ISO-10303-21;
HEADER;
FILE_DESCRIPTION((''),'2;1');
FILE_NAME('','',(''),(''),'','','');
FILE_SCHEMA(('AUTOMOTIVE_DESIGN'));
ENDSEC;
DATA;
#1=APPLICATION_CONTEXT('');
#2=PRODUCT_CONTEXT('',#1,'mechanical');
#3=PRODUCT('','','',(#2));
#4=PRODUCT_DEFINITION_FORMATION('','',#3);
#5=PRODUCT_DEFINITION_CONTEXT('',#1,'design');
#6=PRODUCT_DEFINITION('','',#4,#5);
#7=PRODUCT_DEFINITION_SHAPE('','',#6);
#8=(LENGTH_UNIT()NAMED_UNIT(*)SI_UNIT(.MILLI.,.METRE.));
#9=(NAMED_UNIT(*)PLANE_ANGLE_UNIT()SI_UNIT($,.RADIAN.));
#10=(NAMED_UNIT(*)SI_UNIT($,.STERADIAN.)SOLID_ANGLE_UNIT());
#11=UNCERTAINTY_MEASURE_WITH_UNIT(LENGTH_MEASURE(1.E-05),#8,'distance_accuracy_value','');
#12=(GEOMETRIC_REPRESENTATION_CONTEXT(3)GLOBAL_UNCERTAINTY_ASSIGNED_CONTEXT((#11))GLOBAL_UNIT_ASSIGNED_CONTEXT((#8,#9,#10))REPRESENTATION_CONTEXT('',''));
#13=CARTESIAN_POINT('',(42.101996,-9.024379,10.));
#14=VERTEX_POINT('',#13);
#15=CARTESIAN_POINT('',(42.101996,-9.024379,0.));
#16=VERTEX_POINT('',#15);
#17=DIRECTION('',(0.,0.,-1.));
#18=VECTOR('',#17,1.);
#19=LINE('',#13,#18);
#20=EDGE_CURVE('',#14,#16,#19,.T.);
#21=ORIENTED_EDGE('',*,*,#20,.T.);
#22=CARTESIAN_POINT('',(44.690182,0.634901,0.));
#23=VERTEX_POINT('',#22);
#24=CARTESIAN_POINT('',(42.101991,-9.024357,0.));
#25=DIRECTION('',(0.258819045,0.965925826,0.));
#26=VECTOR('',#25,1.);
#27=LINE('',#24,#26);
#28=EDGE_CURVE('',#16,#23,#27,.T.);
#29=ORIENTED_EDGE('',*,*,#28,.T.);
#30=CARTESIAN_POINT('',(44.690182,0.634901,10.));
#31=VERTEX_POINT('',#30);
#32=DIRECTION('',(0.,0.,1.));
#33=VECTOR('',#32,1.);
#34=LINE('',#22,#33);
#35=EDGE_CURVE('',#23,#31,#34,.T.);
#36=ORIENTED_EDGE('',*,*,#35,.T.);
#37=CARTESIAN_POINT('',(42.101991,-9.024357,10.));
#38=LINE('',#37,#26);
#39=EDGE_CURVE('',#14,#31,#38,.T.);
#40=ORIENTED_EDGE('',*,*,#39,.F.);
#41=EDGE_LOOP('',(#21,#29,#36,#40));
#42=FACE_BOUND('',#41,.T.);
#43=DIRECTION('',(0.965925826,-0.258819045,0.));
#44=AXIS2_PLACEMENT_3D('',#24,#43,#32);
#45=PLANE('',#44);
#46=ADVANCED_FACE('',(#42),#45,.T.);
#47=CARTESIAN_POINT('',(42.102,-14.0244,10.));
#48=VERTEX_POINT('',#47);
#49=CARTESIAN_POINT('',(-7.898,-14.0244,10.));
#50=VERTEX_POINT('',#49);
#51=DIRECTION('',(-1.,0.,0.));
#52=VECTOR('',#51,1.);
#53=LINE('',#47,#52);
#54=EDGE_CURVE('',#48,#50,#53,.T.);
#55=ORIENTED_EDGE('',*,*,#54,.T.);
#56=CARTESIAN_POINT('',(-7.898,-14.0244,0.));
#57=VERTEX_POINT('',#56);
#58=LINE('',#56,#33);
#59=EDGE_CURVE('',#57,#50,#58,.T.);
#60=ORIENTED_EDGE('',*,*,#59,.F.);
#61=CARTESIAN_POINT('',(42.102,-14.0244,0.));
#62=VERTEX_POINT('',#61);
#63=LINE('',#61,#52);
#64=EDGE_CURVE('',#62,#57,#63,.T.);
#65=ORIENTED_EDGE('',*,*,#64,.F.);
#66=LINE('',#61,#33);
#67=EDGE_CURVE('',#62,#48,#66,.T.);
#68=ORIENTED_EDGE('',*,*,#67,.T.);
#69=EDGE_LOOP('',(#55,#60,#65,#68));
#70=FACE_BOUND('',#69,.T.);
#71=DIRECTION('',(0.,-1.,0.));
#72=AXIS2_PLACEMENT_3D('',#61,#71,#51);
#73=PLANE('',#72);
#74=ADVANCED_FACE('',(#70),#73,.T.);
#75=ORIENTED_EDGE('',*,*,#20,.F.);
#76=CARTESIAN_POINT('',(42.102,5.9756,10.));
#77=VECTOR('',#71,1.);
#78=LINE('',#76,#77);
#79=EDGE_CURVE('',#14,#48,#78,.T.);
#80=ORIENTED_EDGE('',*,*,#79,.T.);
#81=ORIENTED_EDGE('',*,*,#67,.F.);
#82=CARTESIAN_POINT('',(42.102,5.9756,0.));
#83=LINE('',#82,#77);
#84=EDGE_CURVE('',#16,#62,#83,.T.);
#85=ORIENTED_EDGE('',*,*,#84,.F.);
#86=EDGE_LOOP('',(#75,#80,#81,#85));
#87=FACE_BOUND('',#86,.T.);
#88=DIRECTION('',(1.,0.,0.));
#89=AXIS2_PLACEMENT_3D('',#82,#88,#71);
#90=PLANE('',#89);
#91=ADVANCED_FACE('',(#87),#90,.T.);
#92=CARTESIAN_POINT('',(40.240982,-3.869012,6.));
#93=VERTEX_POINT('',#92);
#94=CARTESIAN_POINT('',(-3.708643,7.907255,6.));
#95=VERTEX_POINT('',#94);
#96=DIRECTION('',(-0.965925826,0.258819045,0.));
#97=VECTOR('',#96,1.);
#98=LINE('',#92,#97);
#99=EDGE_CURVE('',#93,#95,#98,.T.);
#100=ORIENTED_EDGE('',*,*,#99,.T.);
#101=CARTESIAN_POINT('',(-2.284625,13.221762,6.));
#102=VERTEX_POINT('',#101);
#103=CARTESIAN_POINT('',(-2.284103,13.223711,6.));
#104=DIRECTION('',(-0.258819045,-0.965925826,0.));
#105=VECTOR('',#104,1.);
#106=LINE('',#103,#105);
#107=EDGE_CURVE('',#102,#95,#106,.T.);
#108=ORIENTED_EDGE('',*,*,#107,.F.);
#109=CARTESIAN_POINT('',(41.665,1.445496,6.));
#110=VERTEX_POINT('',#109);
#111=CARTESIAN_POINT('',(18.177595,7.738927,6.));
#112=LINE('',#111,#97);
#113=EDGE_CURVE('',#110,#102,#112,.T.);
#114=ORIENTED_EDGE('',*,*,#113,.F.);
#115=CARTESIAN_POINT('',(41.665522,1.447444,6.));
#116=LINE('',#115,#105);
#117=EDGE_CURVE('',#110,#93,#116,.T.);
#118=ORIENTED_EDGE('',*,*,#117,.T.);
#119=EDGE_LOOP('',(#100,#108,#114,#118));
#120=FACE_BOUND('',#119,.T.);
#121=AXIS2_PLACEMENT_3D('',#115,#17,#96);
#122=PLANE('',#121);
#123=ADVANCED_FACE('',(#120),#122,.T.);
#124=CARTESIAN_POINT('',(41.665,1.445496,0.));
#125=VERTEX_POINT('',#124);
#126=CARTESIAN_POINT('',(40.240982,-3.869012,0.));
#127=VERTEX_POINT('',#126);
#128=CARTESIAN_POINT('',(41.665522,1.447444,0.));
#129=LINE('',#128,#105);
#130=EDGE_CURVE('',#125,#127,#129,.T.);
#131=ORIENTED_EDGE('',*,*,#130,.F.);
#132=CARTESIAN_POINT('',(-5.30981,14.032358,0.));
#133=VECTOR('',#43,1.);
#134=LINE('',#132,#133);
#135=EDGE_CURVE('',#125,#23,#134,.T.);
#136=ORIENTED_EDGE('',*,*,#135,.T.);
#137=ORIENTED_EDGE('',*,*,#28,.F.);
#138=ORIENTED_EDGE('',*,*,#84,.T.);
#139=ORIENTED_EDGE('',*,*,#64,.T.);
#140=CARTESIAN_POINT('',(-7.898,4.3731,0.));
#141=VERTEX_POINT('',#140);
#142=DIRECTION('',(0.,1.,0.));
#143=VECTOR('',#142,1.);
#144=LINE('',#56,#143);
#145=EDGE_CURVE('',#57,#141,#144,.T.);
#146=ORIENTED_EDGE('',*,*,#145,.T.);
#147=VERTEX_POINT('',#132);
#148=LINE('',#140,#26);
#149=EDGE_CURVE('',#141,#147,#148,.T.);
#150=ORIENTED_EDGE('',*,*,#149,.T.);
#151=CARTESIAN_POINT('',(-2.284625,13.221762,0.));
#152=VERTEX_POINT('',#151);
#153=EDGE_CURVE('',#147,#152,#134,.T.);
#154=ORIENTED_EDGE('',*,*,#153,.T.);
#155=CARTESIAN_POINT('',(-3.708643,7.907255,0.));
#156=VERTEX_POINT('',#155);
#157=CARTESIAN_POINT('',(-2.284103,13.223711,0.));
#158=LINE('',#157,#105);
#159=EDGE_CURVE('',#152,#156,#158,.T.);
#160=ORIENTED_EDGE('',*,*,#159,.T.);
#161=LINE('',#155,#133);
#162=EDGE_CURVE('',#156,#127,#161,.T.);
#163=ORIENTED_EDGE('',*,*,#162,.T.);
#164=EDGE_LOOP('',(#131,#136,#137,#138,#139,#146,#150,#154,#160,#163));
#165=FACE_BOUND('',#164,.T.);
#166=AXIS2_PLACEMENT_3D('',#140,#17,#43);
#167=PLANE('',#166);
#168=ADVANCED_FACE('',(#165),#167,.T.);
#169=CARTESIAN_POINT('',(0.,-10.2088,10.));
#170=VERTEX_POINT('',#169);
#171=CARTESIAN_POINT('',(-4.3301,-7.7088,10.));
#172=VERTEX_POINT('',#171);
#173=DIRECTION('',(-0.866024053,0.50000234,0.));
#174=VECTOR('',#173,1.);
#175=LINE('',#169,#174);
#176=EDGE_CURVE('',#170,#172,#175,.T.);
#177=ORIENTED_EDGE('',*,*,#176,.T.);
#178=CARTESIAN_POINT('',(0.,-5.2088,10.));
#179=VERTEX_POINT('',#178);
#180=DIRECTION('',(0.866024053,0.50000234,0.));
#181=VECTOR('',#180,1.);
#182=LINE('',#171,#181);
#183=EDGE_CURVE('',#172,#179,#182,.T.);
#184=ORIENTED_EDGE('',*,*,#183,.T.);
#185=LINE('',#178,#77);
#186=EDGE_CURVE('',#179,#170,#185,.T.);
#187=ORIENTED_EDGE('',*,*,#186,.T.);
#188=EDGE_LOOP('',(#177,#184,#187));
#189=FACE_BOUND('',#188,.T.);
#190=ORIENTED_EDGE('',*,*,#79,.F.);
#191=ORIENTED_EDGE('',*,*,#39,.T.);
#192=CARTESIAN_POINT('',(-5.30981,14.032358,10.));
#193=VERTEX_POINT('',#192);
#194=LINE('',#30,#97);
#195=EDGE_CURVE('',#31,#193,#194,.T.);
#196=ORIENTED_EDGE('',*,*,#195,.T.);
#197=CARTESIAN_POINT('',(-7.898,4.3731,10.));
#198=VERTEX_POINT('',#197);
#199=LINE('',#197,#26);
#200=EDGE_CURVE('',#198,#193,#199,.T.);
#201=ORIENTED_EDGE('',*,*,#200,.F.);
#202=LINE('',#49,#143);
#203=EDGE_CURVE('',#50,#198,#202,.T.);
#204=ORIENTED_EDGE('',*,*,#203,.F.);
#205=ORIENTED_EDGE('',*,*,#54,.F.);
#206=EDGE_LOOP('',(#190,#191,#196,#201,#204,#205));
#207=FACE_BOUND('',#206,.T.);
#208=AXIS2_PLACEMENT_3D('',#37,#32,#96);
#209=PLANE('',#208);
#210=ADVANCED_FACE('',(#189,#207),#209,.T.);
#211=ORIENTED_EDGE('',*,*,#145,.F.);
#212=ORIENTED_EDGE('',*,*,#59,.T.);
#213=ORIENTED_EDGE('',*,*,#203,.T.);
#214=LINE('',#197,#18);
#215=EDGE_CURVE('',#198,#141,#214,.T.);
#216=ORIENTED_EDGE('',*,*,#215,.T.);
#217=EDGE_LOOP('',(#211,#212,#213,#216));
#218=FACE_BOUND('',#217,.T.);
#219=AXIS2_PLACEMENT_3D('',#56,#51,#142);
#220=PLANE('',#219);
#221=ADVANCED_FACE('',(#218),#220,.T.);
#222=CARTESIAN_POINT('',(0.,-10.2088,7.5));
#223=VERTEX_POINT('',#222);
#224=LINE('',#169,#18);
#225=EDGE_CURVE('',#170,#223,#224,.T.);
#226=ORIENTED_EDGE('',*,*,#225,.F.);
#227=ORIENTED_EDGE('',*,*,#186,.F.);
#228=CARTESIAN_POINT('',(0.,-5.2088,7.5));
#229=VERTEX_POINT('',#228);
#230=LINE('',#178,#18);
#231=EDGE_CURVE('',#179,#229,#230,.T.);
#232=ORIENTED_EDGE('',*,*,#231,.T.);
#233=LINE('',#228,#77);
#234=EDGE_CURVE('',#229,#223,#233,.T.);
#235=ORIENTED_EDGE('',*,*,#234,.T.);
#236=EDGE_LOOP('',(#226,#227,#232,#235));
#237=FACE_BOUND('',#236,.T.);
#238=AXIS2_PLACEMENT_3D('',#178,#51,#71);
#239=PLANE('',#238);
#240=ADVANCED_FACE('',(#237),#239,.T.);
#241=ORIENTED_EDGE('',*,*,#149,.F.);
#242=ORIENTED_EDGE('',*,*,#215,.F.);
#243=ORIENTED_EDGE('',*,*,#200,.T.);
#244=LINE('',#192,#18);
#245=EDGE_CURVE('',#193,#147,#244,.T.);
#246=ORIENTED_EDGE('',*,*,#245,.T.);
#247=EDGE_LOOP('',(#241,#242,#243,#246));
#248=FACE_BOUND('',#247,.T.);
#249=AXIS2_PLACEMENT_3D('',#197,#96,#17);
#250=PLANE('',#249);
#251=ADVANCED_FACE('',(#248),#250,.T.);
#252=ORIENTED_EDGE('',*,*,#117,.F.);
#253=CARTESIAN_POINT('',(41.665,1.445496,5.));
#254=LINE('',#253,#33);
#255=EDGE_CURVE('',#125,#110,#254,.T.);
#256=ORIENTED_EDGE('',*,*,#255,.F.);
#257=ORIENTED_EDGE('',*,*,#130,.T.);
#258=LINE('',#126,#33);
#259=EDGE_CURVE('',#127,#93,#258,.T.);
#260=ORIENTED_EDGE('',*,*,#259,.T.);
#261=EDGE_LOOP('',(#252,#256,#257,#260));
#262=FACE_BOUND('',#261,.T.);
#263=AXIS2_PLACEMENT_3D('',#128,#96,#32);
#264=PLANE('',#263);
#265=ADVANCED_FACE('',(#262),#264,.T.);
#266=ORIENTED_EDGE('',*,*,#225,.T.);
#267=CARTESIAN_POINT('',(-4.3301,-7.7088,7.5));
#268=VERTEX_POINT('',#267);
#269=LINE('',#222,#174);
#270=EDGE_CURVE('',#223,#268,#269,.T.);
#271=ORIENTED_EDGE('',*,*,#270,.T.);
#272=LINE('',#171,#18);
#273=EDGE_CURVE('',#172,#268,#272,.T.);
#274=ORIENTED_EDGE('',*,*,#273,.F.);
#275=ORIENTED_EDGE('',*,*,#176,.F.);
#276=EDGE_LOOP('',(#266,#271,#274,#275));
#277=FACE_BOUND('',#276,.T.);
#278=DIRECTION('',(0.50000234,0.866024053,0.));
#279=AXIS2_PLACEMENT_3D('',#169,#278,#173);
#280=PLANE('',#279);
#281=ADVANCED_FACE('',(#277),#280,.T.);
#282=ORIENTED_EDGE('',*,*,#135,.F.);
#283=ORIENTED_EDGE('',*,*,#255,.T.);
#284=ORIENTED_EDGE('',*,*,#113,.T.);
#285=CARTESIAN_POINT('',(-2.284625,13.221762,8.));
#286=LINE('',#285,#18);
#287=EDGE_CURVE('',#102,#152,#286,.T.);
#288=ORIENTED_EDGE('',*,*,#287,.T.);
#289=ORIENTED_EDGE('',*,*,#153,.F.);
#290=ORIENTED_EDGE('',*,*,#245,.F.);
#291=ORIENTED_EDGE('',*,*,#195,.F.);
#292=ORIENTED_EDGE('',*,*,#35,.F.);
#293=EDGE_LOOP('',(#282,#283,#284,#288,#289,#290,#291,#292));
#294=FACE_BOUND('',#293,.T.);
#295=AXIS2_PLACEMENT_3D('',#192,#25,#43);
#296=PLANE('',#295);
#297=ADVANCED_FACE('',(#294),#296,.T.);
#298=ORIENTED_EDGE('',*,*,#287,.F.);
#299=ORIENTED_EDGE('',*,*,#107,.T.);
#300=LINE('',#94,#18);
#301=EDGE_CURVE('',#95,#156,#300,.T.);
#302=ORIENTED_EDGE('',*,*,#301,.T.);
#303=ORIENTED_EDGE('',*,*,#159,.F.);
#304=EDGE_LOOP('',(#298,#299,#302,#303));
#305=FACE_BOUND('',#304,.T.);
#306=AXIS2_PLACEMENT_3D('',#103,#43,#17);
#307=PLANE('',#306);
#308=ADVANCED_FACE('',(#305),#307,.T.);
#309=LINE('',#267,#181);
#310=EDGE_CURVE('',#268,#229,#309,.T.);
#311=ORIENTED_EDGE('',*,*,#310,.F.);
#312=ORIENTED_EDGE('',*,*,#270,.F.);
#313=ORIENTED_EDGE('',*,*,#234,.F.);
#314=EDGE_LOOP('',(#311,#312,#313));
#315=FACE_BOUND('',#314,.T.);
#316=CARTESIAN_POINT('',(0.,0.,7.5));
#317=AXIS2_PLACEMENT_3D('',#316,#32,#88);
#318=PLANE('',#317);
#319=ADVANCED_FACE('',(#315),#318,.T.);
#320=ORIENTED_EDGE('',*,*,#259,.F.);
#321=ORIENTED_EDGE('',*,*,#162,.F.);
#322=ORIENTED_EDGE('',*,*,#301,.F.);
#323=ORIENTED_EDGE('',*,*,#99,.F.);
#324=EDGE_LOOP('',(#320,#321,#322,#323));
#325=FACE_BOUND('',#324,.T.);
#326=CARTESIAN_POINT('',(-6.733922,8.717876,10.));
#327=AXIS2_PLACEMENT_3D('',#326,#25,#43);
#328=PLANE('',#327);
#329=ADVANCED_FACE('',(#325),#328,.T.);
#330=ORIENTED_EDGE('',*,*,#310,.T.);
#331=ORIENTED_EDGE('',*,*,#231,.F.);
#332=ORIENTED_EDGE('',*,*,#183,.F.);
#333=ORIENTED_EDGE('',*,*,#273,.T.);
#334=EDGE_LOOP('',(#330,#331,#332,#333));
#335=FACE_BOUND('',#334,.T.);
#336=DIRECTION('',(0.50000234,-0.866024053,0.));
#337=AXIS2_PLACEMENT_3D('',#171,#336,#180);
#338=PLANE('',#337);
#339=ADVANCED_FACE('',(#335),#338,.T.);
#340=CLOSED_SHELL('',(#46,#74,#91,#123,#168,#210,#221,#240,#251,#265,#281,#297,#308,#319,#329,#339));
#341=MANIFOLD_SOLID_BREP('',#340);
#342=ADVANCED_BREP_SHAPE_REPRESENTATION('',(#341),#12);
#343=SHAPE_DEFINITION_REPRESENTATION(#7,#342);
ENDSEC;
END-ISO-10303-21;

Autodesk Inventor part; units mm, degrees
ref_plane "YZ Plane" through (0, 0, 0) normal (1, 0, 0) x (0, 1, 0)
ref_plane "XZ Plane" through (0, 0, 0) normal (0, 1, 0) x (-1, 0, 0)
ref_plane "XY Plane" through (0, 0, 0) normal (0, 0, 1) x (1, 0, 0)
sketch "Sketch1" plane through (0, 0, 0) normal (0, 0, 1) x (1, 0, 0)
  line L0 (-7.898, 5.9756) -> (42.102, 5.9756)
  line L1 (42.102, 5.9756) -> (42.102, -14.0244)
  line L2 (42.102, -14.0244) -> (-7.898, -14.0244)
  line L3 (-7.898, -14.0244) -> (-7.898, 5.9756)
  point P0 (0, 0)
  dimension "d0" = 50
  dimension "d1" = 20
extrude "Extrusion1" add sketch "Sketch1" along normal blind 10
sketch "Sketch2" plane through (0, 0, 10) normal (0, 0, 1) x (1, 0, 0)
  line L0 (-7.898, 5.9756) -> (-7.898, -14.0244) projected
  line L1 (-7.898, 4.3731) -> (42.102, -9.0244)
  line L2 (42.102, -14.0244) -> (42.102, 5.9756) projected
  line L3 (-7.898, 4.3731) -> (-7.898, 5.9756)
  line L4 (42.102, 5.9756) -> (-7.898, 5.9756) projected
  line L5 (42.102, 5.9756) -> (42.102, -9.0244)
  point P0 (0, 0)
  dimension "d4" = 5
  dimension "d5" = 75
extrude "Extrusion2" cut sketch "Sketch2" against normal up to surface (10 mm away)
sketch "Sketch3" plane through (-7.898, 4.3731, 10) normal (0.258819, 0.9659258, 0) x (0.9659258, -0.258819, 0)
  line L0 (53.0579, 0) -> (51.7638, 0) projected
  line L1 (0, 10) -> (4.7616, 10) projected
  line L2 (51.7638, 0) -> (0, 0)
  line L3 (0, 0) -> (0, 10)
  line L4 (0, 10) -> (51.7638, 10)
  line L5 (51.7638, 10) -> (51.7638, 0)
  point P0 (8.7608, 10)
extrude "Extrusion3" add sketch "Sketch3" along normal blind 10
sketch "Sketch4" plane through (-5.3099, 14.0324, 10) normal (0.258819, 0.9659258, 0) x (0.9659258, -0.258819, 0)
  line L0 (48.632, 4) -> (3.132, 4)
  line L1 (3.132, 4) -> (3.132, 10)
  line L2 (3.132, 10) -> (48.632, 10)
  line L3 (48.632, 10) -> (48.632, 4)
  line L4 (0, 0) -> (51.7638, 0) projected
  line L5 (0, 10) -> (0, 0) projected
  line L6 (51.7638, 10) -> (0, 10) projected
  point P0 (8.7608, 10)
  point P1 (25.882, 5)
  dimension "d10" = 45.5
  dimension "d11" = 6
  dimension "d13" = 25.882
  dimension "d14" = 22.75
  dimension "d22" = 0
extrude "Extrusion4" cut sketch "Sketch4" against normal blind 5.5
sketch "Sketch5" plane through (0, 0, 10) normal (0, 0, 1) x (1, 0, 0)
  line L0 (0, -5.2088) -> (0, -10.2088)
  line L1 (0, -10.2088) -> (-4.3301, -7.7088)
  line L2 (-4.3301, -7.7088) -> (0, -5.2088)
  point P0 (0, 0)
  dimension "d17" = 5
  dimension "d18" = 5
extrude "Extrusion5" cut sketch "Sketch5" against normal blind 2.5
equation "\"d14\" = 0.5 * d10"
properties part number "Angled Base Adapter"
